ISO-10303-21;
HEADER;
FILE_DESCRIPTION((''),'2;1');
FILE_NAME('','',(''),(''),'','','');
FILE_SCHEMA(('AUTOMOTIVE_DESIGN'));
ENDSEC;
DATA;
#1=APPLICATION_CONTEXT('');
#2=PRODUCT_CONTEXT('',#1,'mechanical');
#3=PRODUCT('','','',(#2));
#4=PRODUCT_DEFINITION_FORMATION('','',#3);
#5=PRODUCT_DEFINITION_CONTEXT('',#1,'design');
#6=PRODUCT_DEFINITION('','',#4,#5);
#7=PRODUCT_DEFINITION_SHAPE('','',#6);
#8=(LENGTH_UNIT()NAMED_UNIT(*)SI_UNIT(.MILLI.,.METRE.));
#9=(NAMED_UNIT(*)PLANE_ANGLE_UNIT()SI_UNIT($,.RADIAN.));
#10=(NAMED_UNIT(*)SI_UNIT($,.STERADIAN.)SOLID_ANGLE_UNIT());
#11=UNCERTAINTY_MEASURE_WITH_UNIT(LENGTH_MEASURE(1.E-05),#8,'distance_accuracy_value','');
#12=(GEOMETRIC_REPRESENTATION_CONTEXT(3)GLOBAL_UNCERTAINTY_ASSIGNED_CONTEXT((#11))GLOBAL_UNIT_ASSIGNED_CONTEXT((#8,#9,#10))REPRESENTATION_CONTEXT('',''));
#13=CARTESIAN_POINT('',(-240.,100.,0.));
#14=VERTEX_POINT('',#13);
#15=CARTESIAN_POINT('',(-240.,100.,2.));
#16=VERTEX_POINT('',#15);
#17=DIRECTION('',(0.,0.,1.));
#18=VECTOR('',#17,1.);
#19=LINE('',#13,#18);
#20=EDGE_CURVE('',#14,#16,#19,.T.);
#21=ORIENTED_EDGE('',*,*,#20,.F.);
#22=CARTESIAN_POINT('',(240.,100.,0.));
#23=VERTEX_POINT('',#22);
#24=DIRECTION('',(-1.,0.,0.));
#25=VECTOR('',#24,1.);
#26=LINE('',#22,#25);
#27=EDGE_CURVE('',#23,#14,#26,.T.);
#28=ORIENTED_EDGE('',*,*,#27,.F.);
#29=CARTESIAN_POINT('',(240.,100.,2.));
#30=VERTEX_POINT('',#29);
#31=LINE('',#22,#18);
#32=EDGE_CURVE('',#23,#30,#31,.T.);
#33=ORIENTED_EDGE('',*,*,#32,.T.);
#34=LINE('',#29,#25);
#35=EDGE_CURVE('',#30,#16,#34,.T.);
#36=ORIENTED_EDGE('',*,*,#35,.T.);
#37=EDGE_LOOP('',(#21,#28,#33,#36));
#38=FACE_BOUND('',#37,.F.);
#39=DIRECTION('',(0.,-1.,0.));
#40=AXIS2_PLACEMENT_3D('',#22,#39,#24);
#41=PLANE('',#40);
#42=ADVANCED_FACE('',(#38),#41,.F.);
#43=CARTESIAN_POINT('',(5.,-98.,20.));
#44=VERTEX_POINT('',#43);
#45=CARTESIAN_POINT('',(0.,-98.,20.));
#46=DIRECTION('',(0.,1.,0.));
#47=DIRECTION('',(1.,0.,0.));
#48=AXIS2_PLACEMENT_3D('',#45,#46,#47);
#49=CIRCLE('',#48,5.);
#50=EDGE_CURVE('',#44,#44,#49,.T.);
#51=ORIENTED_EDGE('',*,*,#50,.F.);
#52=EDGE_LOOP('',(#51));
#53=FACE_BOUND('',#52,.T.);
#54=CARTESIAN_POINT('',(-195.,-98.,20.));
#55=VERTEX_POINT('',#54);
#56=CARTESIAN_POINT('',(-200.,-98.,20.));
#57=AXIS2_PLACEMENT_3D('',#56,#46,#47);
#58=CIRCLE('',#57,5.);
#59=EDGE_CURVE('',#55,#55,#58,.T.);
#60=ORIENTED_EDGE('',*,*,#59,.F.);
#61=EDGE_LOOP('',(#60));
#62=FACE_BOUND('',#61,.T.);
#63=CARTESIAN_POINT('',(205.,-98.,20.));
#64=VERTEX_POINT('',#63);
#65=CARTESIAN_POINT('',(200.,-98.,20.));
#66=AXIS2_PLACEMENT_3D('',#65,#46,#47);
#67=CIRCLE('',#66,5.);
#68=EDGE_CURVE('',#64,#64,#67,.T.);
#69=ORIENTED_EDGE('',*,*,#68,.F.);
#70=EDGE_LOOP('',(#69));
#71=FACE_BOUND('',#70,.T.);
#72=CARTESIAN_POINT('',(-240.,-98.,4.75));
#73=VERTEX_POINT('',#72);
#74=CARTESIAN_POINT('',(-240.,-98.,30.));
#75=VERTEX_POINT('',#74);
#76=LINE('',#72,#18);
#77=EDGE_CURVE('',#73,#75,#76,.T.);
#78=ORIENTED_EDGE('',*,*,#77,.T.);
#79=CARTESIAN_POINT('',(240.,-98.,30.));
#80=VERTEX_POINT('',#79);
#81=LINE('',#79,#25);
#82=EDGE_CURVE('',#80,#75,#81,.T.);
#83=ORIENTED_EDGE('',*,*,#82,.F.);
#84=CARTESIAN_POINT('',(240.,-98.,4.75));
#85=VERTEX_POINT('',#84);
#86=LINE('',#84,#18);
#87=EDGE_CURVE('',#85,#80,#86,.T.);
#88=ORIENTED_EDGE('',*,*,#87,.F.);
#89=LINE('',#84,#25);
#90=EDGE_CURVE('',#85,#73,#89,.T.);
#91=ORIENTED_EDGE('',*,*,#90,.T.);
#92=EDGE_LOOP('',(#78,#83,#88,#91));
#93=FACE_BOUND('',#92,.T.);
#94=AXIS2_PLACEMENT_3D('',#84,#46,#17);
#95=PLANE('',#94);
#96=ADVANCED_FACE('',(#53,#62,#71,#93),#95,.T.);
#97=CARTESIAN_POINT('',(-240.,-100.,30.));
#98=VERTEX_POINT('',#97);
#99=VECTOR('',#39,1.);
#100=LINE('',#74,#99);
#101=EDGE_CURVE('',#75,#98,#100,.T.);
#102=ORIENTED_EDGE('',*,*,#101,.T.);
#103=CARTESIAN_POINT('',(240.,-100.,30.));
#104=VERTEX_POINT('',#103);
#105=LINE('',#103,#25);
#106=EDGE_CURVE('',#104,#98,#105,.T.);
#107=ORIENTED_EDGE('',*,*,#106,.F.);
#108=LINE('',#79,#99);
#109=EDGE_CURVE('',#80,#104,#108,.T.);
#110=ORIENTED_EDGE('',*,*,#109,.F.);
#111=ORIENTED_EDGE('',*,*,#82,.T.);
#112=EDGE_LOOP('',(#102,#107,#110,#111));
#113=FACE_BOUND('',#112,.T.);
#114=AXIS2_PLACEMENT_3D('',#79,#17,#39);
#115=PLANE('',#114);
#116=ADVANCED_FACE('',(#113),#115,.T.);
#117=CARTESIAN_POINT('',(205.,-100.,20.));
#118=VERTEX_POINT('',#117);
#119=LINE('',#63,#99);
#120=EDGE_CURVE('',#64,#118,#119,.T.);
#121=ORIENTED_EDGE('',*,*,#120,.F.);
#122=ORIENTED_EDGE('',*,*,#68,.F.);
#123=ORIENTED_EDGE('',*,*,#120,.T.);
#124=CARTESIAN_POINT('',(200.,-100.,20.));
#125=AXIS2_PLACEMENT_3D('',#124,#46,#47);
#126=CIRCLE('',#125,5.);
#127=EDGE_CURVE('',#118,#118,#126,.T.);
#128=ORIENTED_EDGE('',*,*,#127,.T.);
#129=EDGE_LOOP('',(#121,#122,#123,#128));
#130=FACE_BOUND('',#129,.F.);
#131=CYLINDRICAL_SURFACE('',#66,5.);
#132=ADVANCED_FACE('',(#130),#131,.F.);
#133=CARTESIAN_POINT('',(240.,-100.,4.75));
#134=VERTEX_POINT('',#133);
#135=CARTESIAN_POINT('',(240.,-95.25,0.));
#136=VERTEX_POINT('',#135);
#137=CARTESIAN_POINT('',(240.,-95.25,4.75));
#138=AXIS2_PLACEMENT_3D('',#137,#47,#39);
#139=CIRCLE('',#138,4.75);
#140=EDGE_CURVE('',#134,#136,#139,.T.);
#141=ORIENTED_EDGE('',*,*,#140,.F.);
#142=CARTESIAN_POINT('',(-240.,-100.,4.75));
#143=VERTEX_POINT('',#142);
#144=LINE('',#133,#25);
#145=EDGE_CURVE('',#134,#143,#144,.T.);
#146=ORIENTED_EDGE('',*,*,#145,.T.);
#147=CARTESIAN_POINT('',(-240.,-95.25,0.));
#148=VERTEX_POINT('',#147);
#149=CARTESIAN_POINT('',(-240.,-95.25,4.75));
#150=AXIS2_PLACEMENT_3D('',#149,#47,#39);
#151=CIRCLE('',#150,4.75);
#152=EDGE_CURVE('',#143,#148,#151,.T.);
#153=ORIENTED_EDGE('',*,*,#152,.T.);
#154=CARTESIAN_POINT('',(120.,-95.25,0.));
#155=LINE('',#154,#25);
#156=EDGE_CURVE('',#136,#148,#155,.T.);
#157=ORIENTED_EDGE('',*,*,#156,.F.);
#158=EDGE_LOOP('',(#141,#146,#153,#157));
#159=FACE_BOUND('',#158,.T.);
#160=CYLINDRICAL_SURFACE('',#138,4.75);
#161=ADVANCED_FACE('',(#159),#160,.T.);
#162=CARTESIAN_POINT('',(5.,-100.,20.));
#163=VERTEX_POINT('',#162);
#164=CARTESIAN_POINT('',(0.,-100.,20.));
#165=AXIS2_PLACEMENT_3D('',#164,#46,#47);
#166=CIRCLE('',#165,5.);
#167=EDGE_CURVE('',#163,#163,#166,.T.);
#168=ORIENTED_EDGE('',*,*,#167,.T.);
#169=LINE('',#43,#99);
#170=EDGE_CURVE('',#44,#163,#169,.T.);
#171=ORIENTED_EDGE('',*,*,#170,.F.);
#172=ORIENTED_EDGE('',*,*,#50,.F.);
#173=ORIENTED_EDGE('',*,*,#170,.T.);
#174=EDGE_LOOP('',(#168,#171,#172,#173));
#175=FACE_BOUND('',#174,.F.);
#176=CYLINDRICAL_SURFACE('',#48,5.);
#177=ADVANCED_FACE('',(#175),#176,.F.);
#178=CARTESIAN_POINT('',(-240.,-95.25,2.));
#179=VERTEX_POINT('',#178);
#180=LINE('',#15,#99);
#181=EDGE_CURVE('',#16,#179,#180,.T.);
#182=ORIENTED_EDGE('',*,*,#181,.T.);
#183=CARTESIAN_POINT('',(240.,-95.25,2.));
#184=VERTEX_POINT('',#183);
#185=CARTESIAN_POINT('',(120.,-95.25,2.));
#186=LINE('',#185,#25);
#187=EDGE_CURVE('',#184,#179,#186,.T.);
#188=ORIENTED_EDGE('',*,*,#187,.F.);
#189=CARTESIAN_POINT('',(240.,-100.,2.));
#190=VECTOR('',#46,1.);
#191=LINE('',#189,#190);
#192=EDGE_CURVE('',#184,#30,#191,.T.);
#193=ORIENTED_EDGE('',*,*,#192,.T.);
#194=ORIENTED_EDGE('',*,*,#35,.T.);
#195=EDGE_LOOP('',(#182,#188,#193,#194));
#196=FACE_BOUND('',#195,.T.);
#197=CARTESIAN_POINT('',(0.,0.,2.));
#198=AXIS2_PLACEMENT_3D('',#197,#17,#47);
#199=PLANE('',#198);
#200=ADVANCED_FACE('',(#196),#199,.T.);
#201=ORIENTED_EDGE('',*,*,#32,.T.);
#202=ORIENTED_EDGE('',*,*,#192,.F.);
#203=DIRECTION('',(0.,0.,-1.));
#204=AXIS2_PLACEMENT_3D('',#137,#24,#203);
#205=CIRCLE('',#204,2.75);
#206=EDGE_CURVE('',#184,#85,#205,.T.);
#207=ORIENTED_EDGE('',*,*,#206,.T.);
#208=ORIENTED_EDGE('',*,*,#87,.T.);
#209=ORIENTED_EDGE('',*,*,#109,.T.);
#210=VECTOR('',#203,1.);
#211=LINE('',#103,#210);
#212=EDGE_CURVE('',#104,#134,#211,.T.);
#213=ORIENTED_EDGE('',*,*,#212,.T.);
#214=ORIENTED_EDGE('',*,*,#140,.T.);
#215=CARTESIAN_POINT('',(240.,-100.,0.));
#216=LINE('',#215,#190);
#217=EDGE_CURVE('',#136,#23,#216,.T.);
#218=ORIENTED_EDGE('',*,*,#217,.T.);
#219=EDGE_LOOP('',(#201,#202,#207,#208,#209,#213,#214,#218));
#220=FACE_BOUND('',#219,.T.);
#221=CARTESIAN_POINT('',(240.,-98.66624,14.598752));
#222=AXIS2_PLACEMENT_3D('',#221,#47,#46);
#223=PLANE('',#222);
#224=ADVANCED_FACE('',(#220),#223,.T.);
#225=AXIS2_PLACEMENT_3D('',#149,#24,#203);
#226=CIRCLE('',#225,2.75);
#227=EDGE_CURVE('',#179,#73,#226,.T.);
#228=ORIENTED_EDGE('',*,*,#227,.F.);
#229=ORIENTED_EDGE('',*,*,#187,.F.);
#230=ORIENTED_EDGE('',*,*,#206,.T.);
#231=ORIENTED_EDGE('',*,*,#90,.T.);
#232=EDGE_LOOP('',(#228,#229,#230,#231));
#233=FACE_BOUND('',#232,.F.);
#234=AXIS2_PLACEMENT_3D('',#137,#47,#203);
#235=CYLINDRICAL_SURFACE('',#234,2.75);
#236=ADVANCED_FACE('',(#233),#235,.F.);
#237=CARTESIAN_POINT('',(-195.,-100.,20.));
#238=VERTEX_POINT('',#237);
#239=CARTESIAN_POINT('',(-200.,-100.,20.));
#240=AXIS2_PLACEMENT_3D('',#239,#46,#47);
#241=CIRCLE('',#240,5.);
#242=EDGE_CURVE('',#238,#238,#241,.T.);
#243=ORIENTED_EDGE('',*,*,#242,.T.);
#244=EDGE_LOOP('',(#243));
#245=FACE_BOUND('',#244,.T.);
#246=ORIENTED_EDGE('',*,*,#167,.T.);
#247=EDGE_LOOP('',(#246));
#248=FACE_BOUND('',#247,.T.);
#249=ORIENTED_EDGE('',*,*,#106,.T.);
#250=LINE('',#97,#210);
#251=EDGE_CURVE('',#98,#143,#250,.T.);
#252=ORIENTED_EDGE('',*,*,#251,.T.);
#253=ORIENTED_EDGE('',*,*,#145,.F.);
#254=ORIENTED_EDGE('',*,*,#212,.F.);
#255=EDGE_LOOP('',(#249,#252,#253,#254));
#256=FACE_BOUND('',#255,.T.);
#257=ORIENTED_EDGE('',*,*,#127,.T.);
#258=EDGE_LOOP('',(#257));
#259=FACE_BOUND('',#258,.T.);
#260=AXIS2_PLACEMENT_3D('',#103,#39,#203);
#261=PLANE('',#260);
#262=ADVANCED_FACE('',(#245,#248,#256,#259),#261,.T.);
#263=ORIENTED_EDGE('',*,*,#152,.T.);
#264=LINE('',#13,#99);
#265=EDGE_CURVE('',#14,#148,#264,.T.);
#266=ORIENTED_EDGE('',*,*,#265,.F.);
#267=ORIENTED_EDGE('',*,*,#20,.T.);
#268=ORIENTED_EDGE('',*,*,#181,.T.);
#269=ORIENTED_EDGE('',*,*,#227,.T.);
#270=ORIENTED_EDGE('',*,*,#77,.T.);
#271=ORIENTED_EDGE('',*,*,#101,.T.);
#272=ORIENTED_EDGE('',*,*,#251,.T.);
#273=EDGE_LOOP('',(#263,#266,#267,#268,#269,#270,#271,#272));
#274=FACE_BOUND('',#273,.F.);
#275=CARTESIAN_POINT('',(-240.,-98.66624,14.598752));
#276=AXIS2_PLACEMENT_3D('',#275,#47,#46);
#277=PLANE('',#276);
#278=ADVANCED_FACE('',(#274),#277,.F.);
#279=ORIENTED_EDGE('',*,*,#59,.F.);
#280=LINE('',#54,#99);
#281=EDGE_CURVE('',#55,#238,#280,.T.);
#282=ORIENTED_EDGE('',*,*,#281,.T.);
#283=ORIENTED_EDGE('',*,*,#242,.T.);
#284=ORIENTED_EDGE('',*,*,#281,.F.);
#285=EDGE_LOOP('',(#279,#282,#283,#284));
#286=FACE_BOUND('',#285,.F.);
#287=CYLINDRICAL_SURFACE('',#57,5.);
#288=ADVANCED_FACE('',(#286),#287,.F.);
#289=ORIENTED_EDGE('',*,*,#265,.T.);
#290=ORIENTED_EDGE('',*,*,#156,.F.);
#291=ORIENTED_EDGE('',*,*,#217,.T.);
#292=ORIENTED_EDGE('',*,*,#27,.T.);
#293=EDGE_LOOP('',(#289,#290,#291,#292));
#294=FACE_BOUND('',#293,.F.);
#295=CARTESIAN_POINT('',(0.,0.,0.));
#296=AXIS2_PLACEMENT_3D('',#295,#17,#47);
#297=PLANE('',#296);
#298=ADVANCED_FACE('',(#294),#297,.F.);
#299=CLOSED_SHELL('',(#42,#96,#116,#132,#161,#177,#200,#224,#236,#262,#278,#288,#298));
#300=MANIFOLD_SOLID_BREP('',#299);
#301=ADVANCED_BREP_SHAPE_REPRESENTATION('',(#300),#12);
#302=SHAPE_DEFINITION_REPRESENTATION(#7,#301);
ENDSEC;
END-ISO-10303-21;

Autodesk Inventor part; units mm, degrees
ref_plane "YZ Plane" through (0, 0, 0) normal (1, 0, 0) x (0, 1, 0)
ref_plane "XZ Plane" through (0, 0, 0) normal (0, 1, 0) x (-1, 0, 0)
ref_plane "XY Plane" through (0, 0, 0) normal (0, 0, 1) x (1, 0, 0)
sketch "Sketch1" plane through (0, 0, 0) normal (0, 0, 1) x (1, 0, 0)
  line L0 (-240, -100) -> (240, -100)
  line L1 (240, -100) -> (240, 100)
  line L2 (240, 100) -> (-240, 100)
  line L3 (-240, 100) -> (-240, -100)
  line L4 (-240, -100) -> (240, 100) construction
  line L5 (240, -100) -> (-240, 100) construction
  point P0 (0, 0)
  dimension "d0" = 480
  dimension "d1" = 200
extrude "Plate1" add sketch "Sketch1" along normal blind 2
sketch "Sketch2" plane through (0, 0, 0) normal (0, 0, -1) x (-1, 0, 0)
  line L0 (-220, 80) -> (-20, 80) construction
  line L1 (-20, 80) -> (-20, 60) construction
  line L2 (-20, 60) -> (-220, 60) construction
  line L3 (-220, 60) -> (-220, 80) construction
  line L4 (-240, 100) -> (240, 100) projected
  line L5 (-240, -100) -> (-240, 100) projected
  point P0 (0, 0)
  dimension "d6" = 200
  dimension "d9" = 20
  dimension "d10" = 20
  dimension "d11" = 20
mark "Mark1"
sketch "Sketch3" plane through (240, -98, 0) normal (0, -1, 0) x (1, 0, 0)
  line L0 (-480, 0) -> (0, 0)
  line L1 (0, 0) -> (0, 30)
  line L2 (0, 30) -> (-480, 30)
  line L3 (-480, 30) -> (-480, 0)
edge flange "Flange1" height 30 angle 90 thickness 2 bend radius 2.75 thickness toward (0, -1, 0) relief round relief width 2 relief depth 1 edges at (0, -100, 2) wall of the first edge with corners at (-240, -98, 0) (240, -98, 0) (240, -98, 30) (-240, -98, 30)
bend "Bend1"
corner "Corner1"
sketch "Sketch4" plane through (-240, -98, 30) normal (0, 1, 0) x (1, 0, 0)
  line L0 (480, 25.25) -> (0, 25.25) projected
  line L1 (0, 25.25) -> (0, 0) projected
  line L2 (0, 0) -> (480, 0) projected
  line L3 (480, 25.25) -> (480, 0) projected
  circle A0 centre (240, 10) radius 5
  point P0 (240, 30)
  point P1 (240, 25.25)
  point P2 (240, 0)
  dimension "d22" = 10
  dimension "d23" = 10
extrude "Cut1" cut sketch "Sketch4" against normal blind 2 contours A0
pattern_linear "Rectangular Pattern1" count 3 spacing 200 along (1, 0, 0) of "Cut1" first direction both ways yes
equation "\"d24\" = Thickness"
equation "\"d2\" = Thickness"
equation "\"d12\" = BendReliefWidth"
equation "\"d13\" = BendReliefDepth"
equation "\"d14\" = MinimumRemnant"
equation "\"d15\" = TransitionRadius"
equation "\"d18\" = BendRadius"
equation "\"d19\" = CornerReliefSize"
equation "\"d20\" = GapSize"
equation "\"d21\" = JacobiRadiusSize"
equation "\"BendReliefWidth\" = Thickness"
equation "\"BendReliefDepth\" = 0.5 * Thickness"
equation "\"CornerReliefSize\" = 4 * Thickness"
equation "\"MinimumRemnant\" = 2 * Thickness"
equation "\"TransitionRadius\" = BendRadius"
equation "\"JacobiRadiusSize\" = BendRadius"
equation "\"GapSize\" = Thickness"
equation "\"Thickness\" = 2"
equation "\"BendRadius\" = 2.75"
properties part number "TRM 014 face main" material "AISI 304"
